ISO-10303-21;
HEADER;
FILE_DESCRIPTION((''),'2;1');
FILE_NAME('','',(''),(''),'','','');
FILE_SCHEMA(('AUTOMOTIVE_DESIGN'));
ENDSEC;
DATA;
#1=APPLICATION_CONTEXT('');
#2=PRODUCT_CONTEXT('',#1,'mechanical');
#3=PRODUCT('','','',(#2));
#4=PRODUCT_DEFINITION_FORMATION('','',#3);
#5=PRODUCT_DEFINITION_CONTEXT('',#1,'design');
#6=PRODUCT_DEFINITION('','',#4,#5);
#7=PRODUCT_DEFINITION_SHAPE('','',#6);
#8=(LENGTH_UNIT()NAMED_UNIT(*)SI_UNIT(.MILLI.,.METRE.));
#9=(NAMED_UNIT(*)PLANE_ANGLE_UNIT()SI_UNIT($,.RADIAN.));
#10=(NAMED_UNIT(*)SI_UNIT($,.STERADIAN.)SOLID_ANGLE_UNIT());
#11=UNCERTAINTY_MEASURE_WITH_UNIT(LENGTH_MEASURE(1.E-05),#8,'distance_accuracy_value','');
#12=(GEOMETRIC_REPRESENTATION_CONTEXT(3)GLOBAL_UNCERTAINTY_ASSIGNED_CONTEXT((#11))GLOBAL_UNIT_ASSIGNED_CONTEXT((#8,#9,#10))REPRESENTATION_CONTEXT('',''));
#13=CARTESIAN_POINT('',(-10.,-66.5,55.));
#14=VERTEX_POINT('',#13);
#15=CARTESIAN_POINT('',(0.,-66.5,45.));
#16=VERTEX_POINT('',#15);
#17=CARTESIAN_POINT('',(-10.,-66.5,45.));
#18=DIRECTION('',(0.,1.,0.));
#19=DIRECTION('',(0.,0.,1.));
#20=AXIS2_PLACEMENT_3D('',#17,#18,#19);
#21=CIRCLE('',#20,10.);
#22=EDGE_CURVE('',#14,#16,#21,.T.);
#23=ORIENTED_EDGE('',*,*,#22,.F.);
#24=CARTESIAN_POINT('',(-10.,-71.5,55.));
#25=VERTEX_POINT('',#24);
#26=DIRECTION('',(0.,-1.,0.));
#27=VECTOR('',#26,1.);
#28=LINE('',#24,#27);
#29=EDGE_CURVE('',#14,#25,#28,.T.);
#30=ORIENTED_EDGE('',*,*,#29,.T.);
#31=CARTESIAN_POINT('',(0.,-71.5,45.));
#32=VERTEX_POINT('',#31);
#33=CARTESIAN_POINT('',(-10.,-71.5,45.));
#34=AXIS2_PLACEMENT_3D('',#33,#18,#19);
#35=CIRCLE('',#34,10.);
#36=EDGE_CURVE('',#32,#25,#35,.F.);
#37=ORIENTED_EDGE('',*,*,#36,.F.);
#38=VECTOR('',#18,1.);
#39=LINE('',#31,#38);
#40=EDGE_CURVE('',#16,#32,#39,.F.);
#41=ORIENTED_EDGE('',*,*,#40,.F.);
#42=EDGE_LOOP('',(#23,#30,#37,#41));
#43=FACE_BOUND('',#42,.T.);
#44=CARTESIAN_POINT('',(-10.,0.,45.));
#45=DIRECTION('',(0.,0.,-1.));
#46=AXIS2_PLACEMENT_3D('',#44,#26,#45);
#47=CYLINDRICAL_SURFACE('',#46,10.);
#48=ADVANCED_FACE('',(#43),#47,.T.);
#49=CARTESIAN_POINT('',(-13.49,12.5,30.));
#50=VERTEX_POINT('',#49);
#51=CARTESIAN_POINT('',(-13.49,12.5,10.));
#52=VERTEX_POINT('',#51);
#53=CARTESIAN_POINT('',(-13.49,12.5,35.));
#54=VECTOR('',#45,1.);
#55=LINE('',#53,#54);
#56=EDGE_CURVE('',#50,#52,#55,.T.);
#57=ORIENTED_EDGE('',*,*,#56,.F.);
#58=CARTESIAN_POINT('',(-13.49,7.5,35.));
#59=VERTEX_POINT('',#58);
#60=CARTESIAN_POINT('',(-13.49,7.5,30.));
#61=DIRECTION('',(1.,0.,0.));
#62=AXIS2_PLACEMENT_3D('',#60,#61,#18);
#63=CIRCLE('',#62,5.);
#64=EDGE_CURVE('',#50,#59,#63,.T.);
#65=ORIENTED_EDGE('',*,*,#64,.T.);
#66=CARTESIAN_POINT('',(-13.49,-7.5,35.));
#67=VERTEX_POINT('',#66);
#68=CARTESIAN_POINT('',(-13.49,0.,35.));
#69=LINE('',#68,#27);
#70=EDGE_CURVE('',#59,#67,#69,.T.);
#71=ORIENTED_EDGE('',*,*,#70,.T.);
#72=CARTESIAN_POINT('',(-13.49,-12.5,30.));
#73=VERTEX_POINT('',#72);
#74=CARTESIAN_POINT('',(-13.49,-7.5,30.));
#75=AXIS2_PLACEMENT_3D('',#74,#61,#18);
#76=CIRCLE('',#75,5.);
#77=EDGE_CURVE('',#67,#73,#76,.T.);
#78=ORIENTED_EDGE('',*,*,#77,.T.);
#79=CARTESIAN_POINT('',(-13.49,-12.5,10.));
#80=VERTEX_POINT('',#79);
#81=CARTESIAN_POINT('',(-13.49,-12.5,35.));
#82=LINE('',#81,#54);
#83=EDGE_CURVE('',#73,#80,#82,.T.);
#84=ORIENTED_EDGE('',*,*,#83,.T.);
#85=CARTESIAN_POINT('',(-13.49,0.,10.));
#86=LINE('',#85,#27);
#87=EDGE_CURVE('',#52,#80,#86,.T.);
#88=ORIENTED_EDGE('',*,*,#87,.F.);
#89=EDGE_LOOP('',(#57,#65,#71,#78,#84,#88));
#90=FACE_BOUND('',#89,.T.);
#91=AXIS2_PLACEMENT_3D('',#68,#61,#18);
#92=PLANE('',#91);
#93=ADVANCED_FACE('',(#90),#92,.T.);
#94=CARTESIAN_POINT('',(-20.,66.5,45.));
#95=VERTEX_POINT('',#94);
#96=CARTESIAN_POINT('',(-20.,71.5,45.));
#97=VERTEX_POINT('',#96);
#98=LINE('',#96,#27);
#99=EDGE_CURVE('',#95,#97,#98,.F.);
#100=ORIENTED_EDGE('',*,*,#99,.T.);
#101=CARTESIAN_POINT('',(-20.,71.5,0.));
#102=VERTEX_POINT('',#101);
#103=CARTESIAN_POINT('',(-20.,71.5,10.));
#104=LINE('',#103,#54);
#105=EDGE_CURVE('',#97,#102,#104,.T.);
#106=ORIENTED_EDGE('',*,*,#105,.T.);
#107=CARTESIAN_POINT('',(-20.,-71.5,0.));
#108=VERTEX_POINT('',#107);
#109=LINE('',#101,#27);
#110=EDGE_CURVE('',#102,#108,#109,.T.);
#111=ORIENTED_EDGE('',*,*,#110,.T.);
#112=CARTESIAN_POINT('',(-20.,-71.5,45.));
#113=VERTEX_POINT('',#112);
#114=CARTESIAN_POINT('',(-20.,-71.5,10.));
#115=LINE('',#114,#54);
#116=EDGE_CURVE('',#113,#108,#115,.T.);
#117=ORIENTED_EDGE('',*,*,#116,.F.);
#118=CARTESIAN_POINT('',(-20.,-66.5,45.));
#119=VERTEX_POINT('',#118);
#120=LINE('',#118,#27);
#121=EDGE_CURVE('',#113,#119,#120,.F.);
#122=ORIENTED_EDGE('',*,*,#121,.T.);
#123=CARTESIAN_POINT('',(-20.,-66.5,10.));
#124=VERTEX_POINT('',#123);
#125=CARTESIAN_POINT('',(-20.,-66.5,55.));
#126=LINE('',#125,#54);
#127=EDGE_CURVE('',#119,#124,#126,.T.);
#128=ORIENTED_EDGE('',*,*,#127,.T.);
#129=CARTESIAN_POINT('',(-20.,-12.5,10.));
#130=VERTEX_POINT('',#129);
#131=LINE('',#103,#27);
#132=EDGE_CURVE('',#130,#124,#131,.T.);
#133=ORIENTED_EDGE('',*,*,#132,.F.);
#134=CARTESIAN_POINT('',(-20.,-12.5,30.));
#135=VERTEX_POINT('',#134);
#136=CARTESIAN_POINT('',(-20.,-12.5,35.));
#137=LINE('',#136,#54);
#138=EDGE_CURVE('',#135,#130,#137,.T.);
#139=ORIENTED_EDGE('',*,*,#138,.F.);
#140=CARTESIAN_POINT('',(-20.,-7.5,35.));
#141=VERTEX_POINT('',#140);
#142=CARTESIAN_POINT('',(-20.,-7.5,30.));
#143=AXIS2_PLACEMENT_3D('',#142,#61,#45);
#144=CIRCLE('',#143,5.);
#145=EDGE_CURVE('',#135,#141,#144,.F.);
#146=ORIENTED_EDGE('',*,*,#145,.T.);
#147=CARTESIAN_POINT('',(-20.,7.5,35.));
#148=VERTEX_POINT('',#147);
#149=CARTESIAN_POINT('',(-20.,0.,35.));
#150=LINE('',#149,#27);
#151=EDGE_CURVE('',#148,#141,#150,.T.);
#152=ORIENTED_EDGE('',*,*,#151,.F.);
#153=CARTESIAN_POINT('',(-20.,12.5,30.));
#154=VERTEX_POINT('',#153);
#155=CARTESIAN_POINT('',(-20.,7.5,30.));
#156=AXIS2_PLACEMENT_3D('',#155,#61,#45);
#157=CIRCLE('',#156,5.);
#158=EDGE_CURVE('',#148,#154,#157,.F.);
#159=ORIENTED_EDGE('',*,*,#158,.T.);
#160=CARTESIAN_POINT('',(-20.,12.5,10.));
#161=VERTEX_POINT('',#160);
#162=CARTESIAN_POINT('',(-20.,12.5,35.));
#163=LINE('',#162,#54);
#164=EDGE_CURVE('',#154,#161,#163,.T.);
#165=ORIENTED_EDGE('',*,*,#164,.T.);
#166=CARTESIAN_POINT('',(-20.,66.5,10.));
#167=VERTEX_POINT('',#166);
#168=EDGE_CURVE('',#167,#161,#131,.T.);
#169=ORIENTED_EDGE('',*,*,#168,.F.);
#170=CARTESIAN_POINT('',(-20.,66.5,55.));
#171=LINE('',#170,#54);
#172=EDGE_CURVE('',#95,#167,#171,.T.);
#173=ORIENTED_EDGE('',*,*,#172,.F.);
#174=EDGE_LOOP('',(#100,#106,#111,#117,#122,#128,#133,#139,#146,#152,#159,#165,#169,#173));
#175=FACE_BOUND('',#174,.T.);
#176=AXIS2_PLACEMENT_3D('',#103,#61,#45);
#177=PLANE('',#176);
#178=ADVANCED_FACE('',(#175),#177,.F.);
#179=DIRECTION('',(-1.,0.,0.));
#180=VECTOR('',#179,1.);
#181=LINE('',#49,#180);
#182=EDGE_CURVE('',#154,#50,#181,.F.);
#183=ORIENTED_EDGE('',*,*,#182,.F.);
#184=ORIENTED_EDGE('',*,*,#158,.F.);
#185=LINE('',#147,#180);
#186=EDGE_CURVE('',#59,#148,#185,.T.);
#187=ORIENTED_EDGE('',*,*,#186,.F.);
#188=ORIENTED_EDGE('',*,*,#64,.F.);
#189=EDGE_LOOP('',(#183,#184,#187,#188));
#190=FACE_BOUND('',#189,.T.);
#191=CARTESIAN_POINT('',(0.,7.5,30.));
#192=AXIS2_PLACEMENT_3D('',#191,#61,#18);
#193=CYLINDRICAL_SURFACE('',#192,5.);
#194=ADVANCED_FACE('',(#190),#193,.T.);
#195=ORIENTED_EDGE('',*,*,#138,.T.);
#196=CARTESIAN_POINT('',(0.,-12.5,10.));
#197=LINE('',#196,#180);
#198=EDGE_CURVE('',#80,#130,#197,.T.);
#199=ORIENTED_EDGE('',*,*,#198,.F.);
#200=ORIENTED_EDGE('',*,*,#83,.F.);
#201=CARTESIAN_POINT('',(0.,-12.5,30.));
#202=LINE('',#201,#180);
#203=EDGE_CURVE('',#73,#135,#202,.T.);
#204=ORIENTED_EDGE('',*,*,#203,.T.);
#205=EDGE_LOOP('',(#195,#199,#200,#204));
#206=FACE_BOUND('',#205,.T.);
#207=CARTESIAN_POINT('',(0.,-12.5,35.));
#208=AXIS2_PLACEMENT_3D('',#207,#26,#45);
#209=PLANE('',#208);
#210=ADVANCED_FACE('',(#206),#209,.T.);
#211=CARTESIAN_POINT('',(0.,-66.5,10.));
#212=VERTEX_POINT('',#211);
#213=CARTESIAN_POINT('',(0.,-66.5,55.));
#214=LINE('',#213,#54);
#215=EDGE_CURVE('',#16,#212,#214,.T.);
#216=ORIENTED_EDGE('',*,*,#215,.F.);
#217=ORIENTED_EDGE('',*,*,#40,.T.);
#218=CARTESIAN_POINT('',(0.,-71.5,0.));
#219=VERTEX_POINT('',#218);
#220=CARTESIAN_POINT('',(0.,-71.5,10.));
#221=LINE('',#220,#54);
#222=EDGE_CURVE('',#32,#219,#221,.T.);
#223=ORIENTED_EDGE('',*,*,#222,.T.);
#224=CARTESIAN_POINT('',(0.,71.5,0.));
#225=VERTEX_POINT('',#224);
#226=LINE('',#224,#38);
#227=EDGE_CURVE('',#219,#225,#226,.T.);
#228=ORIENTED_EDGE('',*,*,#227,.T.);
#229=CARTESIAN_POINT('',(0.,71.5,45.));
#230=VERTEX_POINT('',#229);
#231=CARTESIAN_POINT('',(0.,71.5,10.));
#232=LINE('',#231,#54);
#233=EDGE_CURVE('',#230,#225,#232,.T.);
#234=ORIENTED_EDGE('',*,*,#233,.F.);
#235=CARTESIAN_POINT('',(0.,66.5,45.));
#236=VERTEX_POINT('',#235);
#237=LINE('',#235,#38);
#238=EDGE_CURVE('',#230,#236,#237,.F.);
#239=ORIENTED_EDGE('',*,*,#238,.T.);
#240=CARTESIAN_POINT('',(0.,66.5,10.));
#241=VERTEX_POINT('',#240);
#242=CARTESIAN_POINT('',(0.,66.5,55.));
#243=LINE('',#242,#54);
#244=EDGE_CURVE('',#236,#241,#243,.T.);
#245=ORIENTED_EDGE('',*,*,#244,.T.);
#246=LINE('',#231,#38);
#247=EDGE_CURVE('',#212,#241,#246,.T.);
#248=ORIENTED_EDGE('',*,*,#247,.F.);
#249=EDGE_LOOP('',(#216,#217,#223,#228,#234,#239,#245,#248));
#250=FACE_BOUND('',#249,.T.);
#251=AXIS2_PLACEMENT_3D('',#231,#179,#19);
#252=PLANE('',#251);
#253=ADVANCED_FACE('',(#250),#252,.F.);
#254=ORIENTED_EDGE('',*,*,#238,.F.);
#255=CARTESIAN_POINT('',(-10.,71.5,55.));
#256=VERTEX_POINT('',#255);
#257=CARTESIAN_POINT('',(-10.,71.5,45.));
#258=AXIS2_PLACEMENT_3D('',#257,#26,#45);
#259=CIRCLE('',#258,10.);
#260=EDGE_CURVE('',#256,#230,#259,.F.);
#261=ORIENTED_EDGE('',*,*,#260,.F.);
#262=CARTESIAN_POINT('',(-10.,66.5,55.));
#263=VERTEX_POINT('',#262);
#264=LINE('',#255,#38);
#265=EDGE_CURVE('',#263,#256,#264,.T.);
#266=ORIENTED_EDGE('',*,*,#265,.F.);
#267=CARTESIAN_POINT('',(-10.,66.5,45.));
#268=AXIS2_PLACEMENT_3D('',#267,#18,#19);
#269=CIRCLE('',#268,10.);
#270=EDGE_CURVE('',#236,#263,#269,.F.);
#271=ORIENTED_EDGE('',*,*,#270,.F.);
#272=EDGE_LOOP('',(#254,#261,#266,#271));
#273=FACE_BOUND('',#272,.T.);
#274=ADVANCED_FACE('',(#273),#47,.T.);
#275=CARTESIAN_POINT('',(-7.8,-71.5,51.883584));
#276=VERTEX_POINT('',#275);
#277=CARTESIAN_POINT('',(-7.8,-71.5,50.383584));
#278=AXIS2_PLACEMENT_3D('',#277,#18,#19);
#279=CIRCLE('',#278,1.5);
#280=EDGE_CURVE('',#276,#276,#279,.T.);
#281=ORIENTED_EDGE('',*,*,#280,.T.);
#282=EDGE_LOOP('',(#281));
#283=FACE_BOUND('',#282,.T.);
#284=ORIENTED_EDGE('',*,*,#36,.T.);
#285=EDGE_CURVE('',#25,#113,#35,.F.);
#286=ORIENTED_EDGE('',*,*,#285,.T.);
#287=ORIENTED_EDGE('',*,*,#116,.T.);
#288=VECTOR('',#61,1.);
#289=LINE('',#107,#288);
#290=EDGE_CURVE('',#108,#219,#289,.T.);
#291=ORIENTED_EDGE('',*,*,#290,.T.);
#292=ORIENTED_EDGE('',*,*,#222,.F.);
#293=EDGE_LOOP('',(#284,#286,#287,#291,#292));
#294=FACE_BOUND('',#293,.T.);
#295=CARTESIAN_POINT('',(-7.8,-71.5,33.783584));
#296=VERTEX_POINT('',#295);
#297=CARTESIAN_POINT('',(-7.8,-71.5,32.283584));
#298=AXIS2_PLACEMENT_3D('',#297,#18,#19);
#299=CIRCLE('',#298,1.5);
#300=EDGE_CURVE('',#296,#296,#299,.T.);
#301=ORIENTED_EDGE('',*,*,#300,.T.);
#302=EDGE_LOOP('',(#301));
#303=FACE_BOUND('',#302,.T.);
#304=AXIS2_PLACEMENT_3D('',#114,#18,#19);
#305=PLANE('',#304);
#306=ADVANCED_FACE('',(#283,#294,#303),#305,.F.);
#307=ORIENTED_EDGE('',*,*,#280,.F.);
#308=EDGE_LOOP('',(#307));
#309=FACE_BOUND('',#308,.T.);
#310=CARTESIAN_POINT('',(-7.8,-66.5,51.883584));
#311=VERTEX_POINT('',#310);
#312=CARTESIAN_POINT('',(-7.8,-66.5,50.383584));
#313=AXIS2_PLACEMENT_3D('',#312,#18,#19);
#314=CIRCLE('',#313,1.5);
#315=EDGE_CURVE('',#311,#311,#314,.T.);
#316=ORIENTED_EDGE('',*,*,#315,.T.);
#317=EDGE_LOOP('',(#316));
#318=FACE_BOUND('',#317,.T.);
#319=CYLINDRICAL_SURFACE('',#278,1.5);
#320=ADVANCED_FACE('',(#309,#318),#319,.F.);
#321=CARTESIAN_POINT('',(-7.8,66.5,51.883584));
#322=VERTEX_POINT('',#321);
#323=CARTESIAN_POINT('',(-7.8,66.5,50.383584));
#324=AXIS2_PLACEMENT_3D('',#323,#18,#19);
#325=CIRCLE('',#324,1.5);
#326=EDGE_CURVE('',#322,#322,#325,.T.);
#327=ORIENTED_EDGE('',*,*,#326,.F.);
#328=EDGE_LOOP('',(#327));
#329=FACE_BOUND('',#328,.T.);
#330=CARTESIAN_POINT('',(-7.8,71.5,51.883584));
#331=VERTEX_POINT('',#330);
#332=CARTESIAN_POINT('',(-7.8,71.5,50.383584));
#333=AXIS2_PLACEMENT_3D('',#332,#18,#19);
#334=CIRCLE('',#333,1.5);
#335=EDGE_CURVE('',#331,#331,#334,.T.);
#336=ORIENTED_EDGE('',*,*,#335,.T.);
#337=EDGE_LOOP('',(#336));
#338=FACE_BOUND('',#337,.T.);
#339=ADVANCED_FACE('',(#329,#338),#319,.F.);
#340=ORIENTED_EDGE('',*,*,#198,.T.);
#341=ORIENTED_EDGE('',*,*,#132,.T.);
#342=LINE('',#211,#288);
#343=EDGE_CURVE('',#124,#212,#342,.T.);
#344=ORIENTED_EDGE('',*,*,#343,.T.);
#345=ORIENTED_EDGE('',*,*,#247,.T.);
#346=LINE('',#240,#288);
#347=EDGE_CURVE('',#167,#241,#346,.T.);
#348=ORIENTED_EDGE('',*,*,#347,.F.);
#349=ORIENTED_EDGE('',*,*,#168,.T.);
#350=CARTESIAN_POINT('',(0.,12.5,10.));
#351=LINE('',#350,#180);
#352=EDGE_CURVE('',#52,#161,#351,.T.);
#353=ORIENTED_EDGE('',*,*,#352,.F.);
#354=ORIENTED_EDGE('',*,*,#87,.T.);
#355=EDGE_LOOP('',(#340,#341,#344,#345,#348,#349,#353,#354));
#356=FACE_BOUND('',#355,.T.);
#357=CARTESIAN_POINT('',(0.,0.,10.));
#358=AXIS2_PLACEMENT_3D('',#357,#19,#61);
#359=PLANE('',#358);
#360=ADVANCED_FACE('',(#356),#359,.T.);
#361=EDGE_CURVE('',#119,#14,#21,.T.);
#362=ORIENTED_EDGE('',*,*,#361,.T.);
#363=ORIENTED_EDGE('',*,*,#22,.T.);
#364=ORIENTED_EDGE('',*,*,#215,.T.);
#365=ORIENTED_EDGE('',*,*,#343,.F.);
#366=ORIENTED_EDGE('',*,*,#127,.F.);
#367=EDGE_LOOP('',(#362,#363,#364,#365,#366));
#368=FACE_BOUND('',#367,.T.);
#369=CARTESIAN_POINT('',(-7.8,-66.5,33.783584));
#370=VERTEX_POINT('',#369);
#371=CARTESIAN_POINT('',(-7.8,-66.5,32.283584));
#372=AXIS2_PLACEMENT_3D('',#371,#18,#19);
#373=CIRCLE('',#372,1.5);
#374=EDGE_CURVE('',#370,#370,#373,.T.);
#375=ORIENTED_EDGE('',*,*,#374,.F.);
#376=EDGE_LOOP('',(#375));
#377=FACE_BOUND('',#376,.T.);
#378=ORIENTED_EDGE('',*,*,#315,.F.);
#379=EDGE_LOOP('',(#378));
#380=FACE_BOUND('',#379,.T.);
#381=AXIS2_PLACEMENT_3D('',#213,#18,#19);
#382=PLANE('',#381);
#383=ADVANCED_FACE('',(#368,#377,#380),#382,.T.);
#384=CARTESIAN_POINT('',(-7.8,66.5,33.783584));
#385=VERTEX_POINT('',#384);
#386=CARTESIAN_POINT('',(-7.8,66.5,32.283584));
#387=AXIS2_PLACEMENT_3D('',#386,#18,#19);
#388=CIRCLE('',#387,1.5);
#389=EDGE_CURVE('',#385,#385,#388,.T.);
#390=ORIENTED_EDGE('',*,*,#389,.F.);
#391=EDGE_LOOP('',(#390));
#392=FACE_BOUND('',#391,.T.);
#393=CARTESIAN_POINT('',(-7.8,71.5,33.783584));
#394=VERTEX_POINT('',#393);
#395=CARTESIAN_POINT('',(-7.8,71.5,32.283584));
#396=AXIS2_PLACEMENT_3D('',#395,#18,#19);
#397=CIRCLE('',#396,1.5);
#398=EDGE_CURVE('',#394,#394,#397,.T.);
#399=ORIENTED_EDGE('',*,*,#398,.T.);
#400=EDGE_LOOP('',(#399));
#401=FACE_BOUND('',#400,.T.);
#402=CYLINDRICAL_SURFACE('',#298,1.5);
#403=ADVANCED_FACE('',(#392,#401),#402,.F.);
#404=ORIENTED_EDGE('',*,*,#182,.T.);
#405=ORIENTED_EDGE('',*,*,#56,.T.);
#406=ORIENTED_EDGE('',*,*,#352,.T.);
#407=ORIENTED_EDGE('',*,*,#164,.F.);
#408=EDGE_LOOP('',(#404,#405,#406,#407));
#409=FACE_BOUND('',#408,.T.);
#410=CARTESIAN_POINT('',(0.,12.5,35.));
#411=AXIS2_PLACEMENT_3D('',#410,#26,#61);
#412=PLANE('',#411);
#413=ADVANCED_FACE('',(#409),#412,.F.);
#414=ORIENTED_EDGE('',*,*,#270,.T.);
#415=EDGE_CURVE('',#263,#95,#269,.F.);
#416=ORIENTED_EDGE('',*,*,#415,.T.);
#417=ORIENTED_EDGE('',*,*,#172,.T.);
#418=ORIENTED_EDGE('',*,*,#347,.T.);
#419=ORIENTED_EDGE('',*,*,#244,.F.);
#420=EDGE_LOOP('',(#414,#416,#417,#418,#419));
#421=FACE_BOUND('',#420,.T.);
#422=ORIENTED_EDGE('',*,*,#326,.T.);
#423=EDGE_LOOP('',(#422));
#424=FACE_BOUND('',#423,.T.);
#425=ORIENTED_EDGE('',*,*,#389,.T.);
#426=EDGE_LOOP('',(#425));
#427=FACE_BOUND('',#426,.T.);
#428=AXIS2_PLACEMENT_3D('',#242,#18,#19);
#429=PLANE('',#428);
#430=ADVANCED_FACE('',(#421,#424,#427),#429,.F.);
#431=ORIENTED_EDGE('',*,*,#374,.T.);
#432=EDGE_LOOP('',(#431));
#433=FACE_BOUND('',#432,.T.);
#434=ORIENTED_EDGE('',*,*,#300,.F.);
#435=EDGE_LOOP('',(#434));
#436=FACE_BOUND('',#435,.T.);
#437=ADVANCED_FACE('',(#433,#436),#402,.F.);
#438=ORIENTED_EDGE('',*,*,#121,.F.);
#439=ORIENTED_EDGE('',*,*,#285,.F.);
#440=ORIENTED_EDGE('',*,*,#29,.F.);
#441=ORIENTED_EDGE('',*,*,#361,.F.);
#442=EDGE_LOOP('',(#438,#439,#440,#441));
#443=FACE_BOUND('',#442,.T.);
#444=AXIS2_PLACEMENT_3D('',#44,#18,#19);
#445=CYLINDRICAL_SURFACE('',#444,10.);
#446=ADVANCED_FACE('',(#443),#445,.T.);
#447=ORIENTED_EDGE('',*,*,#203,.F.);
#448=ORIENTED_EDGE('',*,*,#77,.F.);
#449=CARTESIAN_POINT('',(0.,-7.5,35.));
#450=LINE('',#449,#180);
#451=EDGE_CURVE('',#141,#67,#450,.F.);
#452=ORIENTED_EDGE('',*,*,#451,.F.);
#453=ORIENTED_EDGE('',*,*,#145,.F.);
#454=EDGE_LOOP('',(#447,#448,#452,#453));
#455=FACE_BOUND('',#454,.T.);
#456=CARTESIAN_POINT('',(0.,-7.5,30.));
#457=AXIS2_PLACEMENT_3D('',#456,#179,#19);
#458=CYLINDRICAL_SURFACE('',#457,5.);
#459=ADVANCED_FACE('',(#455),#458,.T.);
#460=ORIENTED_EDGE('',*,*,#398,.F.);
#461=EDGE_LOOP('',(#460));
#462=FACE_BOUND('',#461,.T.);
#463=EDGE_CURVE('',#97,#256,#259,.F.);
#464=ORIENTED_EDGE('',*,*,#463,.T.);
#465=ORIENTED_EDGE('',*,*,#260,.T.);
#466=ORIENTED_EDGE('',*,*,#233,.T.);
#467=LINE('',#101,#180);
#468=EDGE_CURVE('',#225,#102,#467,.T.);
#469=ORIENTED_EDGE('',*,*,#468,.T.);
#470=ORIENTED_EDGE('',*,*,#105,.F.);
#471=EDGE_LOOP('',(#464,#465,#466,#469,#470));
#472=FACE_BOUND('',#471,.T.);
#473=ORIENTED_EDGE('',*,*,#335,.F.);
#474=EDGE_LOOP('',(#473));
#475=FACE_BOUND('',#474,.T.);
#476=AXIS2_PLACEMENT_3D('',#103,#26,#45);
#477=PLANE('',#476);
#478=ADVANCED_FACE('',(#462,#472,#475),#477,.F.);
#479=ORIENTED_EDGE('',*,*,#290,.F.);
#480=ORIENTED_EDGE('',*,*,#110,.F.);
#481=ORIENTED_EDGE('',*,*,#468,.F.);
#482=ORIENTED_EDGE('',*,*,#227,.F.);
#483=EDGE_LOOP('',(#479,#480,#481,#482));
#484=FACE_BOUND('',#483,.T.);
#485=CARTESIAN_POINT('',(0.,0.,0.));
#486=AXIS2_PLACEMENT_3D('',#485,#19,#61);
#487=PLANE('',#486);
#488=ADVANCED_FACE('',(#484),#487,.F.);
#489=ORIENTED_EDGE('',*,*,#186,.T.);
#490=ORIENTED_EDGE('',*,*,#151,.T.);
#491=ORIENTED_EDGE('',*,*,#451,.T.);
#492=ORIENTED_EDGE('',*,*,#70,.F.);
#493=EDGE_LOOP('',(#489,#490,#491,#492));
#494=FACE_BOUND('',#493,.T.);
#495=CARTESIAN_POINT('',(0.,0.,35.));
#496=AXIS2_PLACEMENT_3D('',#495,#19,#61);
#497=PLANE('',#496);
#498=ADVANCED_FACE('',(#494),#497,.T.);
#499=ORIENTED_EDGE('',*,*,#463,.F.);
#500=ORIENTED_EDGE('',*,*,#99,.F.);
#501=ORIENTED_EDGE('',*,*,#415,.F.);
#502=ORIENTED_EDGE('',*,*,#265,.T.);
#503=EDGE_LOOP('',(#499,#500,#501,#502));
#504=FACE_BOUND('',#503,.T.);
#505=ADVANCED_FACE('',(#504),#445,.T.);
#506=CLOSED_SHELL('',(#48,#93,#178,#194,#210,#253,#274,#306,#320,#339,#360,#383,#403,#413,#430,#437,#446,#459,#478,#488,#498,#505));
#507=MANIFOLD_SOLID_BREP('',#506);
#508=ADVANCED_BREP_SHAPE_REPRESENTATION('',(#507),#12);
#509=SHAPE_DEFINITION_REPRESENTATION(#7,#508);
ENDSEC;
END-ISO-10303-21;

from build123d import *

# Parameters (mm, degrees)
SKETCH1_W           = 20
SKETCH1_H           = 143
BOSS_EXTRUDE1_DEPTH = 10
SKETCH2_W           = 20
SKETCH2_H           = 5
BOSS_EXTRUDE2_DEPTH = 45
FILLET1_R           = 10
SKETCH6_R           = 1.5
CUT_EXTRUDE1_DEPTH  = 155.512135446
SKETCH2_3_W         = 6.51
SKETCH2_3_H         = 12.5
BOSS_EXTRUDE3_DEPTH = 25
FILLET2_R           = 5


with BuildPart() as part:
    # Sketch1 → Boss-Extrude1 (new body)
    with BuildSketch(Plane.XY):
        with Locations((-10, 0)):
            Rectangle(SKETCH1_W, SKETCH1_H)
    extrude(amount=BOSS_EXTRUDE1_DEPTH)

    # Sketch2 → Boss-Extrude2 (add)
    with BuildSketch(Plane.XY.offset(10)):
        with Locations((-10, 69)):
            Rectangle(SKETCH2_W, SKETCH2_H)
        with Locations((-10, -69)):
            Rectangle(SKETCH2_W, SKETCH2_H)
    extrude(amount=BOSS_EXTRUDE2_DEPTH)

    # Fillet1
    fillet1_edges = [part.edges().sort_by_distance(p)[0] for p in [
        (-20, -69, 55),
        (0, -69, 55),
        (-20, 69, 55),
        (0, 69, 55),
    ]]
    fillet(fillet1_edges, radius=FILLET1_R - 0.0001)  # a hair under: the kernel refuses the full size

    # Sketch6 → Cut-Extrude1 (cut, through all)
    with BuildSketch(Plane(origin=(0, 71.5, 0), x_dir=(1, 0, 0), z_dir=(0, 1, 0))):
        with Locations(Location((-7.8, -32.283583697, 0), (0, 0, 270))):
            Circle(SKETCH6_R)
        with Locations(Location((-7.8, -50.383583697, 0), (0, 0, 270))):
            Circle(SKETCH6_R)
    extrude(amount=-CUT_EXTRUDE1_DEPTH, mode=Mode.SUBTRACT)

    # Sketch2<3> → Boss-Extrude3 (add)
    with BuildSketch(Plane.XY.offset(10)):
        with Locations((-16.745, -6.25)):
            Rectangle(SKETCH2_3_W, SKETCH2_3_H)
        with Locations((-16.745, 6.25)):
            Rectangle(SKETCH2_3_W, SKETCH2_3_H)
    extrude(amount=BOSS_EXTRUDE3_DEPTH)

    # Fillet2
    fillet2_edges = [part.edges().sort_by_distance(p)[0] for p in [
        (-16.745, -12.5, 35),
        (-16.745, 12.5, 35),
    ]]
    fillet(fillet2_edges, radius=FILLET2_R)


solid = part.part
